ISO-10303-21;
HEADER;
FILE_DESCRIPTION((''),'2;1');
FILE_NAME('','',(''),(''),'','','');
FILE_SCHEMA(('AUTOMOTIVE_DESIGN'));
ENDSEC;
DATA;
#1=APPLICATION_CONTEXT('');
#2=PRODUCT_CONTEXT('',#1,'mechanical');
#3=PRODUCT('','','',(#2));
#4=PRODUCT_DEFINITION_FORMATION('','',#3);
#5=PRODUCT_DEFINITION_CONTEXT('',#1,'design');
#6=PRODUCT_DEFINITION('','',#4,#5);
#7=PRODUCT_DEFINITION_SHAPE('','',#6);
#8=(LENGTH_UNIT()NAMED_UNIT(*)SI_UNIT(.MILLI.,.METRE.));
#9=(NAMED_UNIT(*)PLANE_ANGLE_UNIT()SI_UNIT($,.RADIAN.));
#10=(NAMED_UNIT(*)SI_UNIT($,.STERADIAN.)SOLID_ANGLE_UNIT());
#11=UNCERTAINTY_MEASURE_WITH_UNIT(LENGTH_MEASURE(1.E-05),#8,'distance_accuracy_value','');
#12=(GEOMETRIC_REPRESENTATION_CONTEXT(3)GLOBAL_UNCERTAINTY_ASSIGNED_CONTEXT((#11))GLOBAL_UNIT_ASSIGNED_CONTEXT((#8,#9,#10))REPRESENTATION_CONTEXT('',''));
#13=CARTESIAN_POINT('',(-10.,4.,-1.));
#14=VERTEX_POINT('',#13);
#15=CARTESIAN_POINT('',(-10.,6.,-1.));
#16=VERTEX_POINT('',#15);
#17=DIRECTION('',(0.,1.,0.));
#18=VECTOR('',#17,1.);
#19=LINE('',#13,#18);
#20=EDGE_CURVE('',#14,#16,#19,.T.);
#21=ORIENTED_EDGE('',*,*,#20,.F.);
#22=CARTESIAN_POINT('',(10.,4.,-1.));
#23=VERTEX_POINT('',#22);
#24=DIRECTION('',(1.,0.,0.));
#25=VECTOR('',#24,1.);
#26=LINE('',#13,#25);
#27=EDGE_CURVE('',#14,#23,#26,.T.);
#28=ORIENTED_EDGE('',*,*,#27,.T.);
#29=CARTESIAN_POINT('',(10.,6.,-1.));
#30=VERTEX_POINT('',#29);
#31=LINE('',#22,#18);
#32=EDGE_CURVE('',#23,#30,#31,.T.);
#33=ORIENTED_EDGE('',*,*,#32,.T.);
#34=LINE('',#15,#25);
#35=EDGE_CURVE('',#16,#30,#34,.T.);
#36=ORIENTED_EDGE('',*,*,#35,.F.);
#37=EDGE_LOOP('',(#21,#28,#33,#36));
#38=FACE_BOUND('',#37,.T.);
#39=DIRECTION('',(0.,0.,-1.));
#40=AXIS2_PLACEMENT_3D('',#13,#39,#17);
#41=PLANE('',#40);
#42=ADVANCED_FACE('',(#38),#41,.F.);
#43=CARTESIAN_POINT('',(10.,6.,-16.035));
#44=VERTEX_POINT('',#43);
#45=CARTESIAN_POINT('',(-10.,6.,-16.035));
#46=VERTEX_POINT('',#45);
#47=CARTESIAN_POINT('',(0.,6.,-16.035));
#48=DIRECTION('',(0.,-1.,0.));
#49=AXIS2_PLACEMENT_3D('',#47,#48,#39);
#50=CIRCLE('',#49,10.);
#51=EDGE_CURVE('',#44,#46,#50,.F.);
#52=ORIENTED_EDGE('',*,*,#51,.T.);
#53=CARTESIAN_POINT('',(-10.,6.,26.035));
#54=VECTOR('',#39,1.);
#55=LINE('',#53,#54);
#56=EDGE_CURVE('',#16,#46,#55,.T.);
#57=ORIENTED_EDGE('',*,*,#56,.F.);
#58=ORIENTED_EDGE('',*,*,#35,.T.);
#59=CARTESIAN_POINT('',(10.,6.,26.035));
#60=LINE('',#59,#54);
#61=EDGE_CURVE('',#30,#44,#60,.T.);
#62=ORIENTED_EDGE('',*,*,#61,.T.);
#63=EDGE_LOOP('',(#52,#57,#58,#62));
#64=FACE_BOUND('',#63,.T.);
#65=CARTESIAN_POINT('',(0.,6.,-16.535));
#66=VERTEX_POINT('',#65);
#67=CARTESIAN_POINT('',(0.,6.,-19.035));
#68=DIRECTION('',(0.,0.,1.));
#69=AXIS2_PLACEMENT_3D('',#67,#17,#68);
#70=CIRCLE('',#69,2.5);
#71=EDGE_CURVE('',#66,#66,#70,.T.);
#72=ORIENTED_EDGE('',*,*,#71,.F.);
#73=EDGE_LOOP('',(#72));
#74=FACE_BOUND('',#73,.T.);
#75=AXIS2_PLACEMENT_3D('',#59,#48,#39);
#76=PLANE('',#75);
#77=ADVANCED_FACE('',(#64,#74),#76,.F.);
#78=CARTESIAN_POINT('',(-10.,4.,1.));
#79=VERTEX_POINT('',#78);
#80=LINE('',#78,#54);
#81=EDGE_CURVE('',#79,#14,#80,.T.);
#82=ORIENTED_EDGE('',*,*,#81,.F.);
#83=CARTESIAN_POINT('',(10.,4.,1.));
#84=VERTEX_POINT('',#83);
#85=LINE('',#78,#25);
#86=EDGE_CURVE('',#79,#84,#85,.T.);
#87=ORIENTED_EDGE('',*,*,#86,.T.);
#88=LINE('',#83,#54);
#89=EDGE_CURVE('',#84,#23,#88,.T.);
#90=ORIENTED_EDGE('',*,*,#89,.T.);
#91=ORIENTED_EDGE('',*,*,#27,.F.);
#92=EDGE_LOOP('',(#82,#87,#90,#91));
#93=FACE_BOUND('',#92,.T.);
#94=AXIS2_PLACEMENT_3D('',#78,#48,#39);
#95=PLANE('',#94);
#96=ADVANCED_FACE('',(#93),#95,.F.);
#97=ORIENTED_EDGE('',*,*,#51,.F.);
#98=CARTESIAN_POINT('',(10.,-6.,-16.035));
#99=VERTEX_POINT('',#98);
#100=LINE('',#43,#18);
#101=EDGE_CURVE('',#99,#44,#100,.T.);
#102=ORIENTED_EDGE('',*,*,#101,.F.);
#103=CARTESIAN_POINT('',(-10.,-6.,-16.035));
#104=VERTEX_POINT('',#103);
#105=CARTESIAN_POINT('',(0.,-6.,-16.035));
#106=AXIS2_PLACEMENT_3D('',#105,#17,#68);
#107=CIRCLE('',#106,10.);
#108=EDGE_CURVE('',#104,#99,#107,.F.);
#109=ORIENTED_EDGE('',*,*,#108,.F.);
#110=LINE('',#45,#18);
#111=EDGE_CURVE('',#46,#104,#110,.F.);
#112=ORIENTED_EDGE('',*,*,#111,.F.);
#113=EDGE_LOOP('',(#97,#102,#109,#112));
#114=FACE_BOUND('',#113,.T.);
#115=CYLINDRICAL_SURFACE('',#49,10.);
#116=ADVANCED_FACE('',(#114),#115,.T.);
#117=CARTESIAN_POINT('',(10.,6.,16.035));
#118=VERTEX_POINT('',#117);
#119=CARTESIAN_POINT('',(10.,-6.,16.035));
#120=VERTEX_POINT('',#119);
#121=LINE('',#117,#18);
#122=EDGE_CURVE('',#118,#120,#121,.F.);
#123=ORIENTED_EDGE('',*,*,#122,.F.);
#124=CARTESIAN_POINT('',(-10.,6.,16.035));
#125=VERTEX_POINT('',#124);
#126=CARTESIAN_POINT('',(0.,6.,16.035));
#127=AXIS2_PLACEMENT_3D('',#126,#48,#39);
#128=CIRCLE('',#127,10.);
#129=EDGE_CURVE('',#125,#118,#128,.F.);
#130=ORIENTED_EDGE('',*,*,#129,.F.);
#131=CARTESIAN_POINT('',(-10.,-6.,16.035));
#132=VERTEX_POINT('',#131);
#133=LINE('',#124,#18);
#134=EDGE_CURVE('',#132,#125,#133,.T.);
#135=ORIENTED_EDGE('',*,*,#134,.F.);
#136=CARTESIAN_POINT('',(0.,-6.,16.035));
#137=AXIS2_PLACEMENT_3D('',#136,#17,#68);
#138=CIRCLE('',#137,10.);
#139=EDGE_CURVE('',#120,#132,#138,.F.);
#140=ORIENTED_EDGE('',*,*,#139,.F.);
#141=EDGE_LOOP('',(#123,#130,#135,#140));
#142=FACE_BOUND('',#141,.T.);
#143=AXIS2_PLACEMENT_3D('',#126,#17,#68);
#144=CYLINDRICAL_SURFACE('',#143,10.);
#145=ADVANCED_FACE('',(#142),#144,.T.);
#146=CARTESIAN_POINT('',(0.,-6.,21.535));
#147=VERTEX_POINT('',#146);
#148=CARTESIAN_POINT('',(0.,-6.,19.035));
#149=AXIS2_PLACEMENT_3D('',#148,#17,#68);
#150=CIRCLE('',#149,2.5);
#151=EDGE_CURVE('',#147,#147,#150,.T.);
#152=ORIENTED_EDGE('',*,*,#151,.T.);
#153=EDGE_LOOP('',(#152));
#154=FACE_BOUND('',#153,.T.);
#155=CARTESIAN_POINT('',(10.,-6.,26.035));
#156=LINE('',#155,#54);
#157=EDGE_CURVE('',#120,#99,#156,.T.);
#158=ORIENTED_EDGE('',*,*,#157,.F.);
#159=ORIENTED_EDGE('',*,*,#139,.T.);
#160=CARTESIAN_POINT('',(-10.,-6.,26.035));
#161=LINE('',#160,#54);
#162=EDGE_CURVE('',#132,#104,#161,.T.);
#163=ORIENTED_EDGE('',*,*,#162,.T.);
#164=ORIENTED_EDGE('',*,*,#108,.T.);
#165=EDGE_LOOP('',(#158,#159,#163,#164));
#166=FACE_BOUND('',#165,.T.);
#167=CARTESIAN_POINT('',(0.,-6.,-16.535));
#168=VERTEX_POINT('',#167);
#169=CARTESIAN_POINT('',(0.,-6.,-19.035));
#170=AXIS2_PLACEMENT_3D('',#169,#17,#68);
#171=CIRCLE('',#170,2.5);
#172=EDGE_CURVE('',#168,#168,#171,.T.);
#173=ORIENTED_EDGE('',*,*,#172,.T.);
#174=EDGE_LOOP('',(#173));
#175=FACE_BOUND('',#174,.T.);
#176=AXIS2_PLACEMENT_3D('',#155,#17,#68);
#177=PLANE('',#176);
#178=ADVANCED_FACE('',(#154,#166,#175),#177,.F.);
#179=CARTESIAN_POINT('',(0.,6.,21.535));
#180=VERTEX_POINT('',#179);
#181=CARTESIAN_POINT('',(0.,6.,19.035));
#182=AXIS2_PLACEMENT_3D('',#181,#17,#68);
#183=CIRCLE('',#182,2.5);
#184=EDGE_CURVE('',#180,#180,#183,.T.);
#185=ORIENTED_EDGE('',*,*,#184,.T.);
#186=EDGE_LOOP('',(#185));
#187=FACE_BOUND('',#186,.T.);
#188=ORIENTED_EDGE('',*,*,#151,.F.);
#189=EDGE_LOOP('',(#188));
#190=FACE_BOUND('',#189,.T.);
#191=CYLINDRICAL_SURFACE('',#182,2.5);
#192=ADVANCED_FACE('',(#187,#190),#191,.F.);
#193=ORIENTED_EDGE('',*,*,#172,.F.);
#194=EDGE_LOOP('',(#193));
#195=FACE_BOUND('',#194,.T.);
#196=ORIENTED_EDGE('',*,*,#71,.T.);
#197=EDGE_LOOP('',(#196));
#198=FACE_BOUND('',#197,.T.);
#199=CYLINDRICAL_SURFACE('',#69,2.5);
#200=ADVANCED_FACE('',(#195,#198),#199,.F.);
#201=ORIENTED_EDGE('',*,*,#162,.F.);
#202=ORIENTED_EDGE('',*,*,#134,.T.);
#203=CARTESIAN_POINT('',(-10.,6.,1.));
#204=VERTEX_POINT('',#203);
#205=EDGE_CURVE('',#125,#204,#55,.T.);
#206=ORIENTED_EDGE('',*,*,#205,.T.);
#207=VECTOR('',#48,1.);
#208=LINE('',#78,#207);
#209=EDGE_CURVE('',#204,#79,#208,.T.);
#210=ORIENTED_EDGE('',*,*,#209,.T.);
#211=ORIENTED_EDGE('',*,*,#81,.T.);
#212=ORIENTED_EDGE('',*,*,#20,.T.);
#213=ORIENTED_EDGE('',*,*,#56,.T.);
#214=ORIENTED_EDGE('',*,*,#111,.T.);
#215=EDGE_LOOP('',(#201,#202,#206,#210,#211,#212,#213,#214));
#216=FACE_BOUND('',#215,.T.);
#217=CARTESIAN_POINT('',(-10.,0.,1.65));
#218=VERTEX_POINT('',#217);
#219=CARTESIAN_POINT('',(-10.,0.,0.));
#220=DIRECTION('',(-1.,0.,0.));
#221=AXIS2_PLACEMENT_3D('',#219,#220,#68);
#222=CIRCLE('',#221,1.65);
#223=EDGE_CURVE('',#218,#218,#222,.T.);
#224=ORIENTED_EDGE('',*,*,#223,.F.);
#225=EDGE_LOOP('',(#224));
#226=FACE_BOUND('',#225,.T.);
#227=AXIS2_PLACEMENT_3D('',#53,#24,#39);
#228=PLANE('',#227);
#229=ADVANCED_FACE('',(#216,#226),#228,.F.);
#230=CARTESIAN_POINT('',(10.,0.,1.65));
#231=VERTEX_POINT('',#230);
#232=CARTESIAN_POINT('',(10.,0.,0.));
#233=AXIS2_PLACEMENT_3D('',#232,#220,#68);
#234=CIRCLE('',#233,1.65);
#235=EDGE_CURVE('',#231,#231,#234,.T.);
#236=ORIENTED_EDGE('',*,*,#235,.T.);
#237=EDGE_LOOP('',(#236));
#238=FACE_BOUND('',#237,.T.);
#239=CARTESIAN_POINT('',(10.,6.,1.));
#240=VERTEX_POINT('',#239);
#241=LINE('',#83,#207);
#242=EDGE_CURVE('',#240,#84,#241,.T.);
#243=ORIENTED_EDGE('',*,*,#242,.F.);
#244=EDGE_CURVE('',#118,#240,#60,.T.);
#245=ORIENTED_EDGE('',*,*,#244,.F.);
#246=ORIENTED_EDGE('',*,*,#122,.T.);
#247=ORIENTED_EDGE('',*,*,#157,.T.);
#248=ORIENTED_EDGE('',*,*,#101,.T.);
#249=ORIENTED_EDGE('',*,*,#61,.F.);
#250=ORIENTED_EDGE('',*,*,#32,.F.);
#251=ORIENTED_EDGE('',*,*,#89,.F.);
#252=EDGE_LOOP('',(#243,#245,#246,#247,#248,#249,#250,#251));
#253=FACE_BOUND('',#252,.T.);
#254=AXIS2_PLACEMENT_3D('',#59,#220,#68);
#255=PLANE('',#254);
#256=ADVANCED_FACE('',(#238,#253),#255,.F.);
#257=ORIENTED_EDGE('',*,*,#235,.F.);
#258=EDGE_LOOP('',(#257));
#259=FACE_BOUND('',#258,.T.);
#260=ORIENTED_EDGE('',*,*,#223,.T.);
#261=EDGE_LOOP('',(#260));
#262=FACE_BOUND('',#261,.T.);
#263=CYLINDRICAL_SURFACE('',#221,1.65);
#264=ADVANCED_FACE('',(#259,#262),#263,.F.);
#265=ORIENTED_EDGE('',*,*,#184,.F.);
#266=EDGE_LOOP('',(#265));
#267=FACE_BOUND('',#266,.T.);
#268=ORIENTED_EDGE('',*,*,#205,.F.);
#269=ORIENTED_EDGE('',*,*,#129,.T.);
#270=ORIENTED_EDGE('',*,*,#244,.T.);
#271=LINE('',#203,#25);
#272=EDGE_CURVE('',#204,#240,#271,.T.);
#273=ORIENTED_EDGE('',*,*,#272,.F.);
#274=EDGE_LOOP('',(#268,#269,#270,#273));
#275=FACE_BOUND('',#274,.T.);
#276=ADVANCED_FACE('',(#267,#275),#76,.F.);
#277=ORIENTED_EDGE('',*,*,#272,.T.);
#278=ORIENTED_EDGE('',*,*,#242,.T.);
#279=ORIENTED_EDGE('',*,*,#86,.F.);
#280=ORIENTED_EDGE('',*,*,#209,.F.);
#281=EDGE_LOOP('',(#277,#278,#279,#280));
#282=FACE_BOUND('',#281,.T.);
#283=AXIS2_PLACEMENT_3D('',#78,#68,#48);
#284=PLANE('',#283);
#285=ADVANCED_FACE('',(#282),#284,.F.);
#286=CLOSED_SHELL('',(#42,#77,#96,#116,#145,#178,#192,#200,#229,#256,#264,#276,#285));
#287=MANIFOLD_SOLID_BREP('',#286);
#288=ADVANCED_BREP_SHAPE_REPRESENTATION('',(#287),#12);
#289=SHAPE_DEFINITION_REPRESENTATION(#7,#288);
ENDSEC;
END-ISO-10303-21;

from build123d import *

# Parameters (mm, degrees)
SKETCH1_W               = 20
SKETCH1_H               = 12
BOSS_EXTRUDE1_DEPTH     = 26.035
M6X1_0_TAPPED_HOLE1_D   = 5
DELETEFACE1_START       = -6
DELETEFACE1_OUTLINE_R   = 2.5
DELETEFACE1_DEPTH       = 12
CUT_EXTRUDE1_DEPTH      = 29.527552033
CUT_EXTRUDE1_DEPTH_BACK = 29.527552033
SKETCH4_W               = 2
SKETCH4_H               = 2
M4X0_7_TAPPED_HOLE1_D   = 3.3
FILLET1_RADIUS          = 10
FILLET1_LENGTH          = 12
FILLET2_RADIUS          = 10
FILLET2_LENGTH          = 12


# Read off the part's stored shape, not the designer's step: DeleteFace1
with BuildPart() as part:
    # Sketch1 → Boss-Extrude1 (new, symmetric)
    with BuildSketch(Plane.XY):
        Rectangle(SKETCH1_W, SKETCH1_H)
    extrude(amount=BOSS_EXTRUDE1_DEPTH, both=True)

    # M6x1.0 Tapped Hole1 (through all)
    with Locations(Plane(origin=(0, 6, 0), x_dir=(1, 0, 0), z_dir=(0, 1, 0))):
        with Locations((0, -19.035), (0, 0), (0, 19.035)):
            Hole(M6X1_0_TAPPED_HOLE1_D / 2)

    # DeleteFace1 outline → DeleteFace1 (add)
    with BuildSketch(Plane(origin=(0, 0, 0), x_dir=(1, 0, 0), z_dir=(0, 1, 0)).offset(DELETEFACE1_START)):
        Circle(DELETEFACE1_OUTLINE_R)
    extrude(amount=DELETEFACE1_DEPTH)

    # Sketch4 → Cut-Extrude1 (cut, two sides: drawn at the far end of the back side and taken through both)
    with BuildSketch(Plane(origin=(0, 0, 0), x_dir=(0, 0, -1), z_dir=(1, 0, 0)).offset(-CUT_EXTRUDE1_DEPTH_BACK)):
        with Locations((0, 5)):
            Rectangle(SKETCH4_W, SKETCH4_H)
    extrude(amount=CUT_EXTRUDE1_DEPTH + CUT_EXTRUDE1_DEPTH_BACK, mode=Mode.SUBTRACT)

    # M4x0.7 Tapped Hole1 (through all)
    with Locations(Plane.ZY.offset(10)):
        with Locations((0, 0)):
            Hole(M4X0_7_TAPPED_HOLE1_D / 2)

    # Fillet1: full round fillet: the end face becomes a half cylinder, R = half its width
    fillet1_face = Plane((0, 0, -26.035), x_dir=(0, -1, 0), z_dir=(0, 0, -1))  # on the end face: x along it, z out of the body
    fillet1_slab = fillet1_face.offset(-FILLET1_RADIUS / 2) * Box(FILLET1_LENGTH, 2 * FILLET1_RADIUS, FILLET1_RADIUS, mode=Mode.PRIVATE)  # the body's end, R deep
    fillet1_round = Plane((0, 0, -16.035), x_dir=(0, 0, -1), z_dir=(0, -1, 0)) * Cylinder(FILLET1_RADIUS, FILLET1_LENGTH, mode=Mode.PRIVATE)  # its axis R under the face
    add(fillet1_slab - fillet1_round, mode=Mode.SUBTRACT)

    # Fillet2: full round fillet: the end face becomes a half cylinder, R = half its width
    fillet2_face = Plane((0, 0, 26.035), x_dir=(0, 1, 0), z_dir=(0, 0, 1))  # on the end face: x along it, z out of the body
    fillet2_slab = fillet2_face.offset(-FILLET2_RADIUS / 2) * Box(FILLET2_LENGTH, 2 * FILLET2_RADIUS, FILLET2_RADIUS, mode=Mode.PRIVATE)  # the body's end, R deep
    fillet2_round = Plane((0, 0, 16.035), x_dir=(0, 0, 1), z_dir=(0, 1, 0)) * Cylinder(FILLET2_RADIUS, FILLET2_LENGTH, mode=Mode.PRIVATE)  # its axis R under the face
    add(fillet2_slab - fillet2_round, mode=Mode.SUBTRACT)


solid = part.part
